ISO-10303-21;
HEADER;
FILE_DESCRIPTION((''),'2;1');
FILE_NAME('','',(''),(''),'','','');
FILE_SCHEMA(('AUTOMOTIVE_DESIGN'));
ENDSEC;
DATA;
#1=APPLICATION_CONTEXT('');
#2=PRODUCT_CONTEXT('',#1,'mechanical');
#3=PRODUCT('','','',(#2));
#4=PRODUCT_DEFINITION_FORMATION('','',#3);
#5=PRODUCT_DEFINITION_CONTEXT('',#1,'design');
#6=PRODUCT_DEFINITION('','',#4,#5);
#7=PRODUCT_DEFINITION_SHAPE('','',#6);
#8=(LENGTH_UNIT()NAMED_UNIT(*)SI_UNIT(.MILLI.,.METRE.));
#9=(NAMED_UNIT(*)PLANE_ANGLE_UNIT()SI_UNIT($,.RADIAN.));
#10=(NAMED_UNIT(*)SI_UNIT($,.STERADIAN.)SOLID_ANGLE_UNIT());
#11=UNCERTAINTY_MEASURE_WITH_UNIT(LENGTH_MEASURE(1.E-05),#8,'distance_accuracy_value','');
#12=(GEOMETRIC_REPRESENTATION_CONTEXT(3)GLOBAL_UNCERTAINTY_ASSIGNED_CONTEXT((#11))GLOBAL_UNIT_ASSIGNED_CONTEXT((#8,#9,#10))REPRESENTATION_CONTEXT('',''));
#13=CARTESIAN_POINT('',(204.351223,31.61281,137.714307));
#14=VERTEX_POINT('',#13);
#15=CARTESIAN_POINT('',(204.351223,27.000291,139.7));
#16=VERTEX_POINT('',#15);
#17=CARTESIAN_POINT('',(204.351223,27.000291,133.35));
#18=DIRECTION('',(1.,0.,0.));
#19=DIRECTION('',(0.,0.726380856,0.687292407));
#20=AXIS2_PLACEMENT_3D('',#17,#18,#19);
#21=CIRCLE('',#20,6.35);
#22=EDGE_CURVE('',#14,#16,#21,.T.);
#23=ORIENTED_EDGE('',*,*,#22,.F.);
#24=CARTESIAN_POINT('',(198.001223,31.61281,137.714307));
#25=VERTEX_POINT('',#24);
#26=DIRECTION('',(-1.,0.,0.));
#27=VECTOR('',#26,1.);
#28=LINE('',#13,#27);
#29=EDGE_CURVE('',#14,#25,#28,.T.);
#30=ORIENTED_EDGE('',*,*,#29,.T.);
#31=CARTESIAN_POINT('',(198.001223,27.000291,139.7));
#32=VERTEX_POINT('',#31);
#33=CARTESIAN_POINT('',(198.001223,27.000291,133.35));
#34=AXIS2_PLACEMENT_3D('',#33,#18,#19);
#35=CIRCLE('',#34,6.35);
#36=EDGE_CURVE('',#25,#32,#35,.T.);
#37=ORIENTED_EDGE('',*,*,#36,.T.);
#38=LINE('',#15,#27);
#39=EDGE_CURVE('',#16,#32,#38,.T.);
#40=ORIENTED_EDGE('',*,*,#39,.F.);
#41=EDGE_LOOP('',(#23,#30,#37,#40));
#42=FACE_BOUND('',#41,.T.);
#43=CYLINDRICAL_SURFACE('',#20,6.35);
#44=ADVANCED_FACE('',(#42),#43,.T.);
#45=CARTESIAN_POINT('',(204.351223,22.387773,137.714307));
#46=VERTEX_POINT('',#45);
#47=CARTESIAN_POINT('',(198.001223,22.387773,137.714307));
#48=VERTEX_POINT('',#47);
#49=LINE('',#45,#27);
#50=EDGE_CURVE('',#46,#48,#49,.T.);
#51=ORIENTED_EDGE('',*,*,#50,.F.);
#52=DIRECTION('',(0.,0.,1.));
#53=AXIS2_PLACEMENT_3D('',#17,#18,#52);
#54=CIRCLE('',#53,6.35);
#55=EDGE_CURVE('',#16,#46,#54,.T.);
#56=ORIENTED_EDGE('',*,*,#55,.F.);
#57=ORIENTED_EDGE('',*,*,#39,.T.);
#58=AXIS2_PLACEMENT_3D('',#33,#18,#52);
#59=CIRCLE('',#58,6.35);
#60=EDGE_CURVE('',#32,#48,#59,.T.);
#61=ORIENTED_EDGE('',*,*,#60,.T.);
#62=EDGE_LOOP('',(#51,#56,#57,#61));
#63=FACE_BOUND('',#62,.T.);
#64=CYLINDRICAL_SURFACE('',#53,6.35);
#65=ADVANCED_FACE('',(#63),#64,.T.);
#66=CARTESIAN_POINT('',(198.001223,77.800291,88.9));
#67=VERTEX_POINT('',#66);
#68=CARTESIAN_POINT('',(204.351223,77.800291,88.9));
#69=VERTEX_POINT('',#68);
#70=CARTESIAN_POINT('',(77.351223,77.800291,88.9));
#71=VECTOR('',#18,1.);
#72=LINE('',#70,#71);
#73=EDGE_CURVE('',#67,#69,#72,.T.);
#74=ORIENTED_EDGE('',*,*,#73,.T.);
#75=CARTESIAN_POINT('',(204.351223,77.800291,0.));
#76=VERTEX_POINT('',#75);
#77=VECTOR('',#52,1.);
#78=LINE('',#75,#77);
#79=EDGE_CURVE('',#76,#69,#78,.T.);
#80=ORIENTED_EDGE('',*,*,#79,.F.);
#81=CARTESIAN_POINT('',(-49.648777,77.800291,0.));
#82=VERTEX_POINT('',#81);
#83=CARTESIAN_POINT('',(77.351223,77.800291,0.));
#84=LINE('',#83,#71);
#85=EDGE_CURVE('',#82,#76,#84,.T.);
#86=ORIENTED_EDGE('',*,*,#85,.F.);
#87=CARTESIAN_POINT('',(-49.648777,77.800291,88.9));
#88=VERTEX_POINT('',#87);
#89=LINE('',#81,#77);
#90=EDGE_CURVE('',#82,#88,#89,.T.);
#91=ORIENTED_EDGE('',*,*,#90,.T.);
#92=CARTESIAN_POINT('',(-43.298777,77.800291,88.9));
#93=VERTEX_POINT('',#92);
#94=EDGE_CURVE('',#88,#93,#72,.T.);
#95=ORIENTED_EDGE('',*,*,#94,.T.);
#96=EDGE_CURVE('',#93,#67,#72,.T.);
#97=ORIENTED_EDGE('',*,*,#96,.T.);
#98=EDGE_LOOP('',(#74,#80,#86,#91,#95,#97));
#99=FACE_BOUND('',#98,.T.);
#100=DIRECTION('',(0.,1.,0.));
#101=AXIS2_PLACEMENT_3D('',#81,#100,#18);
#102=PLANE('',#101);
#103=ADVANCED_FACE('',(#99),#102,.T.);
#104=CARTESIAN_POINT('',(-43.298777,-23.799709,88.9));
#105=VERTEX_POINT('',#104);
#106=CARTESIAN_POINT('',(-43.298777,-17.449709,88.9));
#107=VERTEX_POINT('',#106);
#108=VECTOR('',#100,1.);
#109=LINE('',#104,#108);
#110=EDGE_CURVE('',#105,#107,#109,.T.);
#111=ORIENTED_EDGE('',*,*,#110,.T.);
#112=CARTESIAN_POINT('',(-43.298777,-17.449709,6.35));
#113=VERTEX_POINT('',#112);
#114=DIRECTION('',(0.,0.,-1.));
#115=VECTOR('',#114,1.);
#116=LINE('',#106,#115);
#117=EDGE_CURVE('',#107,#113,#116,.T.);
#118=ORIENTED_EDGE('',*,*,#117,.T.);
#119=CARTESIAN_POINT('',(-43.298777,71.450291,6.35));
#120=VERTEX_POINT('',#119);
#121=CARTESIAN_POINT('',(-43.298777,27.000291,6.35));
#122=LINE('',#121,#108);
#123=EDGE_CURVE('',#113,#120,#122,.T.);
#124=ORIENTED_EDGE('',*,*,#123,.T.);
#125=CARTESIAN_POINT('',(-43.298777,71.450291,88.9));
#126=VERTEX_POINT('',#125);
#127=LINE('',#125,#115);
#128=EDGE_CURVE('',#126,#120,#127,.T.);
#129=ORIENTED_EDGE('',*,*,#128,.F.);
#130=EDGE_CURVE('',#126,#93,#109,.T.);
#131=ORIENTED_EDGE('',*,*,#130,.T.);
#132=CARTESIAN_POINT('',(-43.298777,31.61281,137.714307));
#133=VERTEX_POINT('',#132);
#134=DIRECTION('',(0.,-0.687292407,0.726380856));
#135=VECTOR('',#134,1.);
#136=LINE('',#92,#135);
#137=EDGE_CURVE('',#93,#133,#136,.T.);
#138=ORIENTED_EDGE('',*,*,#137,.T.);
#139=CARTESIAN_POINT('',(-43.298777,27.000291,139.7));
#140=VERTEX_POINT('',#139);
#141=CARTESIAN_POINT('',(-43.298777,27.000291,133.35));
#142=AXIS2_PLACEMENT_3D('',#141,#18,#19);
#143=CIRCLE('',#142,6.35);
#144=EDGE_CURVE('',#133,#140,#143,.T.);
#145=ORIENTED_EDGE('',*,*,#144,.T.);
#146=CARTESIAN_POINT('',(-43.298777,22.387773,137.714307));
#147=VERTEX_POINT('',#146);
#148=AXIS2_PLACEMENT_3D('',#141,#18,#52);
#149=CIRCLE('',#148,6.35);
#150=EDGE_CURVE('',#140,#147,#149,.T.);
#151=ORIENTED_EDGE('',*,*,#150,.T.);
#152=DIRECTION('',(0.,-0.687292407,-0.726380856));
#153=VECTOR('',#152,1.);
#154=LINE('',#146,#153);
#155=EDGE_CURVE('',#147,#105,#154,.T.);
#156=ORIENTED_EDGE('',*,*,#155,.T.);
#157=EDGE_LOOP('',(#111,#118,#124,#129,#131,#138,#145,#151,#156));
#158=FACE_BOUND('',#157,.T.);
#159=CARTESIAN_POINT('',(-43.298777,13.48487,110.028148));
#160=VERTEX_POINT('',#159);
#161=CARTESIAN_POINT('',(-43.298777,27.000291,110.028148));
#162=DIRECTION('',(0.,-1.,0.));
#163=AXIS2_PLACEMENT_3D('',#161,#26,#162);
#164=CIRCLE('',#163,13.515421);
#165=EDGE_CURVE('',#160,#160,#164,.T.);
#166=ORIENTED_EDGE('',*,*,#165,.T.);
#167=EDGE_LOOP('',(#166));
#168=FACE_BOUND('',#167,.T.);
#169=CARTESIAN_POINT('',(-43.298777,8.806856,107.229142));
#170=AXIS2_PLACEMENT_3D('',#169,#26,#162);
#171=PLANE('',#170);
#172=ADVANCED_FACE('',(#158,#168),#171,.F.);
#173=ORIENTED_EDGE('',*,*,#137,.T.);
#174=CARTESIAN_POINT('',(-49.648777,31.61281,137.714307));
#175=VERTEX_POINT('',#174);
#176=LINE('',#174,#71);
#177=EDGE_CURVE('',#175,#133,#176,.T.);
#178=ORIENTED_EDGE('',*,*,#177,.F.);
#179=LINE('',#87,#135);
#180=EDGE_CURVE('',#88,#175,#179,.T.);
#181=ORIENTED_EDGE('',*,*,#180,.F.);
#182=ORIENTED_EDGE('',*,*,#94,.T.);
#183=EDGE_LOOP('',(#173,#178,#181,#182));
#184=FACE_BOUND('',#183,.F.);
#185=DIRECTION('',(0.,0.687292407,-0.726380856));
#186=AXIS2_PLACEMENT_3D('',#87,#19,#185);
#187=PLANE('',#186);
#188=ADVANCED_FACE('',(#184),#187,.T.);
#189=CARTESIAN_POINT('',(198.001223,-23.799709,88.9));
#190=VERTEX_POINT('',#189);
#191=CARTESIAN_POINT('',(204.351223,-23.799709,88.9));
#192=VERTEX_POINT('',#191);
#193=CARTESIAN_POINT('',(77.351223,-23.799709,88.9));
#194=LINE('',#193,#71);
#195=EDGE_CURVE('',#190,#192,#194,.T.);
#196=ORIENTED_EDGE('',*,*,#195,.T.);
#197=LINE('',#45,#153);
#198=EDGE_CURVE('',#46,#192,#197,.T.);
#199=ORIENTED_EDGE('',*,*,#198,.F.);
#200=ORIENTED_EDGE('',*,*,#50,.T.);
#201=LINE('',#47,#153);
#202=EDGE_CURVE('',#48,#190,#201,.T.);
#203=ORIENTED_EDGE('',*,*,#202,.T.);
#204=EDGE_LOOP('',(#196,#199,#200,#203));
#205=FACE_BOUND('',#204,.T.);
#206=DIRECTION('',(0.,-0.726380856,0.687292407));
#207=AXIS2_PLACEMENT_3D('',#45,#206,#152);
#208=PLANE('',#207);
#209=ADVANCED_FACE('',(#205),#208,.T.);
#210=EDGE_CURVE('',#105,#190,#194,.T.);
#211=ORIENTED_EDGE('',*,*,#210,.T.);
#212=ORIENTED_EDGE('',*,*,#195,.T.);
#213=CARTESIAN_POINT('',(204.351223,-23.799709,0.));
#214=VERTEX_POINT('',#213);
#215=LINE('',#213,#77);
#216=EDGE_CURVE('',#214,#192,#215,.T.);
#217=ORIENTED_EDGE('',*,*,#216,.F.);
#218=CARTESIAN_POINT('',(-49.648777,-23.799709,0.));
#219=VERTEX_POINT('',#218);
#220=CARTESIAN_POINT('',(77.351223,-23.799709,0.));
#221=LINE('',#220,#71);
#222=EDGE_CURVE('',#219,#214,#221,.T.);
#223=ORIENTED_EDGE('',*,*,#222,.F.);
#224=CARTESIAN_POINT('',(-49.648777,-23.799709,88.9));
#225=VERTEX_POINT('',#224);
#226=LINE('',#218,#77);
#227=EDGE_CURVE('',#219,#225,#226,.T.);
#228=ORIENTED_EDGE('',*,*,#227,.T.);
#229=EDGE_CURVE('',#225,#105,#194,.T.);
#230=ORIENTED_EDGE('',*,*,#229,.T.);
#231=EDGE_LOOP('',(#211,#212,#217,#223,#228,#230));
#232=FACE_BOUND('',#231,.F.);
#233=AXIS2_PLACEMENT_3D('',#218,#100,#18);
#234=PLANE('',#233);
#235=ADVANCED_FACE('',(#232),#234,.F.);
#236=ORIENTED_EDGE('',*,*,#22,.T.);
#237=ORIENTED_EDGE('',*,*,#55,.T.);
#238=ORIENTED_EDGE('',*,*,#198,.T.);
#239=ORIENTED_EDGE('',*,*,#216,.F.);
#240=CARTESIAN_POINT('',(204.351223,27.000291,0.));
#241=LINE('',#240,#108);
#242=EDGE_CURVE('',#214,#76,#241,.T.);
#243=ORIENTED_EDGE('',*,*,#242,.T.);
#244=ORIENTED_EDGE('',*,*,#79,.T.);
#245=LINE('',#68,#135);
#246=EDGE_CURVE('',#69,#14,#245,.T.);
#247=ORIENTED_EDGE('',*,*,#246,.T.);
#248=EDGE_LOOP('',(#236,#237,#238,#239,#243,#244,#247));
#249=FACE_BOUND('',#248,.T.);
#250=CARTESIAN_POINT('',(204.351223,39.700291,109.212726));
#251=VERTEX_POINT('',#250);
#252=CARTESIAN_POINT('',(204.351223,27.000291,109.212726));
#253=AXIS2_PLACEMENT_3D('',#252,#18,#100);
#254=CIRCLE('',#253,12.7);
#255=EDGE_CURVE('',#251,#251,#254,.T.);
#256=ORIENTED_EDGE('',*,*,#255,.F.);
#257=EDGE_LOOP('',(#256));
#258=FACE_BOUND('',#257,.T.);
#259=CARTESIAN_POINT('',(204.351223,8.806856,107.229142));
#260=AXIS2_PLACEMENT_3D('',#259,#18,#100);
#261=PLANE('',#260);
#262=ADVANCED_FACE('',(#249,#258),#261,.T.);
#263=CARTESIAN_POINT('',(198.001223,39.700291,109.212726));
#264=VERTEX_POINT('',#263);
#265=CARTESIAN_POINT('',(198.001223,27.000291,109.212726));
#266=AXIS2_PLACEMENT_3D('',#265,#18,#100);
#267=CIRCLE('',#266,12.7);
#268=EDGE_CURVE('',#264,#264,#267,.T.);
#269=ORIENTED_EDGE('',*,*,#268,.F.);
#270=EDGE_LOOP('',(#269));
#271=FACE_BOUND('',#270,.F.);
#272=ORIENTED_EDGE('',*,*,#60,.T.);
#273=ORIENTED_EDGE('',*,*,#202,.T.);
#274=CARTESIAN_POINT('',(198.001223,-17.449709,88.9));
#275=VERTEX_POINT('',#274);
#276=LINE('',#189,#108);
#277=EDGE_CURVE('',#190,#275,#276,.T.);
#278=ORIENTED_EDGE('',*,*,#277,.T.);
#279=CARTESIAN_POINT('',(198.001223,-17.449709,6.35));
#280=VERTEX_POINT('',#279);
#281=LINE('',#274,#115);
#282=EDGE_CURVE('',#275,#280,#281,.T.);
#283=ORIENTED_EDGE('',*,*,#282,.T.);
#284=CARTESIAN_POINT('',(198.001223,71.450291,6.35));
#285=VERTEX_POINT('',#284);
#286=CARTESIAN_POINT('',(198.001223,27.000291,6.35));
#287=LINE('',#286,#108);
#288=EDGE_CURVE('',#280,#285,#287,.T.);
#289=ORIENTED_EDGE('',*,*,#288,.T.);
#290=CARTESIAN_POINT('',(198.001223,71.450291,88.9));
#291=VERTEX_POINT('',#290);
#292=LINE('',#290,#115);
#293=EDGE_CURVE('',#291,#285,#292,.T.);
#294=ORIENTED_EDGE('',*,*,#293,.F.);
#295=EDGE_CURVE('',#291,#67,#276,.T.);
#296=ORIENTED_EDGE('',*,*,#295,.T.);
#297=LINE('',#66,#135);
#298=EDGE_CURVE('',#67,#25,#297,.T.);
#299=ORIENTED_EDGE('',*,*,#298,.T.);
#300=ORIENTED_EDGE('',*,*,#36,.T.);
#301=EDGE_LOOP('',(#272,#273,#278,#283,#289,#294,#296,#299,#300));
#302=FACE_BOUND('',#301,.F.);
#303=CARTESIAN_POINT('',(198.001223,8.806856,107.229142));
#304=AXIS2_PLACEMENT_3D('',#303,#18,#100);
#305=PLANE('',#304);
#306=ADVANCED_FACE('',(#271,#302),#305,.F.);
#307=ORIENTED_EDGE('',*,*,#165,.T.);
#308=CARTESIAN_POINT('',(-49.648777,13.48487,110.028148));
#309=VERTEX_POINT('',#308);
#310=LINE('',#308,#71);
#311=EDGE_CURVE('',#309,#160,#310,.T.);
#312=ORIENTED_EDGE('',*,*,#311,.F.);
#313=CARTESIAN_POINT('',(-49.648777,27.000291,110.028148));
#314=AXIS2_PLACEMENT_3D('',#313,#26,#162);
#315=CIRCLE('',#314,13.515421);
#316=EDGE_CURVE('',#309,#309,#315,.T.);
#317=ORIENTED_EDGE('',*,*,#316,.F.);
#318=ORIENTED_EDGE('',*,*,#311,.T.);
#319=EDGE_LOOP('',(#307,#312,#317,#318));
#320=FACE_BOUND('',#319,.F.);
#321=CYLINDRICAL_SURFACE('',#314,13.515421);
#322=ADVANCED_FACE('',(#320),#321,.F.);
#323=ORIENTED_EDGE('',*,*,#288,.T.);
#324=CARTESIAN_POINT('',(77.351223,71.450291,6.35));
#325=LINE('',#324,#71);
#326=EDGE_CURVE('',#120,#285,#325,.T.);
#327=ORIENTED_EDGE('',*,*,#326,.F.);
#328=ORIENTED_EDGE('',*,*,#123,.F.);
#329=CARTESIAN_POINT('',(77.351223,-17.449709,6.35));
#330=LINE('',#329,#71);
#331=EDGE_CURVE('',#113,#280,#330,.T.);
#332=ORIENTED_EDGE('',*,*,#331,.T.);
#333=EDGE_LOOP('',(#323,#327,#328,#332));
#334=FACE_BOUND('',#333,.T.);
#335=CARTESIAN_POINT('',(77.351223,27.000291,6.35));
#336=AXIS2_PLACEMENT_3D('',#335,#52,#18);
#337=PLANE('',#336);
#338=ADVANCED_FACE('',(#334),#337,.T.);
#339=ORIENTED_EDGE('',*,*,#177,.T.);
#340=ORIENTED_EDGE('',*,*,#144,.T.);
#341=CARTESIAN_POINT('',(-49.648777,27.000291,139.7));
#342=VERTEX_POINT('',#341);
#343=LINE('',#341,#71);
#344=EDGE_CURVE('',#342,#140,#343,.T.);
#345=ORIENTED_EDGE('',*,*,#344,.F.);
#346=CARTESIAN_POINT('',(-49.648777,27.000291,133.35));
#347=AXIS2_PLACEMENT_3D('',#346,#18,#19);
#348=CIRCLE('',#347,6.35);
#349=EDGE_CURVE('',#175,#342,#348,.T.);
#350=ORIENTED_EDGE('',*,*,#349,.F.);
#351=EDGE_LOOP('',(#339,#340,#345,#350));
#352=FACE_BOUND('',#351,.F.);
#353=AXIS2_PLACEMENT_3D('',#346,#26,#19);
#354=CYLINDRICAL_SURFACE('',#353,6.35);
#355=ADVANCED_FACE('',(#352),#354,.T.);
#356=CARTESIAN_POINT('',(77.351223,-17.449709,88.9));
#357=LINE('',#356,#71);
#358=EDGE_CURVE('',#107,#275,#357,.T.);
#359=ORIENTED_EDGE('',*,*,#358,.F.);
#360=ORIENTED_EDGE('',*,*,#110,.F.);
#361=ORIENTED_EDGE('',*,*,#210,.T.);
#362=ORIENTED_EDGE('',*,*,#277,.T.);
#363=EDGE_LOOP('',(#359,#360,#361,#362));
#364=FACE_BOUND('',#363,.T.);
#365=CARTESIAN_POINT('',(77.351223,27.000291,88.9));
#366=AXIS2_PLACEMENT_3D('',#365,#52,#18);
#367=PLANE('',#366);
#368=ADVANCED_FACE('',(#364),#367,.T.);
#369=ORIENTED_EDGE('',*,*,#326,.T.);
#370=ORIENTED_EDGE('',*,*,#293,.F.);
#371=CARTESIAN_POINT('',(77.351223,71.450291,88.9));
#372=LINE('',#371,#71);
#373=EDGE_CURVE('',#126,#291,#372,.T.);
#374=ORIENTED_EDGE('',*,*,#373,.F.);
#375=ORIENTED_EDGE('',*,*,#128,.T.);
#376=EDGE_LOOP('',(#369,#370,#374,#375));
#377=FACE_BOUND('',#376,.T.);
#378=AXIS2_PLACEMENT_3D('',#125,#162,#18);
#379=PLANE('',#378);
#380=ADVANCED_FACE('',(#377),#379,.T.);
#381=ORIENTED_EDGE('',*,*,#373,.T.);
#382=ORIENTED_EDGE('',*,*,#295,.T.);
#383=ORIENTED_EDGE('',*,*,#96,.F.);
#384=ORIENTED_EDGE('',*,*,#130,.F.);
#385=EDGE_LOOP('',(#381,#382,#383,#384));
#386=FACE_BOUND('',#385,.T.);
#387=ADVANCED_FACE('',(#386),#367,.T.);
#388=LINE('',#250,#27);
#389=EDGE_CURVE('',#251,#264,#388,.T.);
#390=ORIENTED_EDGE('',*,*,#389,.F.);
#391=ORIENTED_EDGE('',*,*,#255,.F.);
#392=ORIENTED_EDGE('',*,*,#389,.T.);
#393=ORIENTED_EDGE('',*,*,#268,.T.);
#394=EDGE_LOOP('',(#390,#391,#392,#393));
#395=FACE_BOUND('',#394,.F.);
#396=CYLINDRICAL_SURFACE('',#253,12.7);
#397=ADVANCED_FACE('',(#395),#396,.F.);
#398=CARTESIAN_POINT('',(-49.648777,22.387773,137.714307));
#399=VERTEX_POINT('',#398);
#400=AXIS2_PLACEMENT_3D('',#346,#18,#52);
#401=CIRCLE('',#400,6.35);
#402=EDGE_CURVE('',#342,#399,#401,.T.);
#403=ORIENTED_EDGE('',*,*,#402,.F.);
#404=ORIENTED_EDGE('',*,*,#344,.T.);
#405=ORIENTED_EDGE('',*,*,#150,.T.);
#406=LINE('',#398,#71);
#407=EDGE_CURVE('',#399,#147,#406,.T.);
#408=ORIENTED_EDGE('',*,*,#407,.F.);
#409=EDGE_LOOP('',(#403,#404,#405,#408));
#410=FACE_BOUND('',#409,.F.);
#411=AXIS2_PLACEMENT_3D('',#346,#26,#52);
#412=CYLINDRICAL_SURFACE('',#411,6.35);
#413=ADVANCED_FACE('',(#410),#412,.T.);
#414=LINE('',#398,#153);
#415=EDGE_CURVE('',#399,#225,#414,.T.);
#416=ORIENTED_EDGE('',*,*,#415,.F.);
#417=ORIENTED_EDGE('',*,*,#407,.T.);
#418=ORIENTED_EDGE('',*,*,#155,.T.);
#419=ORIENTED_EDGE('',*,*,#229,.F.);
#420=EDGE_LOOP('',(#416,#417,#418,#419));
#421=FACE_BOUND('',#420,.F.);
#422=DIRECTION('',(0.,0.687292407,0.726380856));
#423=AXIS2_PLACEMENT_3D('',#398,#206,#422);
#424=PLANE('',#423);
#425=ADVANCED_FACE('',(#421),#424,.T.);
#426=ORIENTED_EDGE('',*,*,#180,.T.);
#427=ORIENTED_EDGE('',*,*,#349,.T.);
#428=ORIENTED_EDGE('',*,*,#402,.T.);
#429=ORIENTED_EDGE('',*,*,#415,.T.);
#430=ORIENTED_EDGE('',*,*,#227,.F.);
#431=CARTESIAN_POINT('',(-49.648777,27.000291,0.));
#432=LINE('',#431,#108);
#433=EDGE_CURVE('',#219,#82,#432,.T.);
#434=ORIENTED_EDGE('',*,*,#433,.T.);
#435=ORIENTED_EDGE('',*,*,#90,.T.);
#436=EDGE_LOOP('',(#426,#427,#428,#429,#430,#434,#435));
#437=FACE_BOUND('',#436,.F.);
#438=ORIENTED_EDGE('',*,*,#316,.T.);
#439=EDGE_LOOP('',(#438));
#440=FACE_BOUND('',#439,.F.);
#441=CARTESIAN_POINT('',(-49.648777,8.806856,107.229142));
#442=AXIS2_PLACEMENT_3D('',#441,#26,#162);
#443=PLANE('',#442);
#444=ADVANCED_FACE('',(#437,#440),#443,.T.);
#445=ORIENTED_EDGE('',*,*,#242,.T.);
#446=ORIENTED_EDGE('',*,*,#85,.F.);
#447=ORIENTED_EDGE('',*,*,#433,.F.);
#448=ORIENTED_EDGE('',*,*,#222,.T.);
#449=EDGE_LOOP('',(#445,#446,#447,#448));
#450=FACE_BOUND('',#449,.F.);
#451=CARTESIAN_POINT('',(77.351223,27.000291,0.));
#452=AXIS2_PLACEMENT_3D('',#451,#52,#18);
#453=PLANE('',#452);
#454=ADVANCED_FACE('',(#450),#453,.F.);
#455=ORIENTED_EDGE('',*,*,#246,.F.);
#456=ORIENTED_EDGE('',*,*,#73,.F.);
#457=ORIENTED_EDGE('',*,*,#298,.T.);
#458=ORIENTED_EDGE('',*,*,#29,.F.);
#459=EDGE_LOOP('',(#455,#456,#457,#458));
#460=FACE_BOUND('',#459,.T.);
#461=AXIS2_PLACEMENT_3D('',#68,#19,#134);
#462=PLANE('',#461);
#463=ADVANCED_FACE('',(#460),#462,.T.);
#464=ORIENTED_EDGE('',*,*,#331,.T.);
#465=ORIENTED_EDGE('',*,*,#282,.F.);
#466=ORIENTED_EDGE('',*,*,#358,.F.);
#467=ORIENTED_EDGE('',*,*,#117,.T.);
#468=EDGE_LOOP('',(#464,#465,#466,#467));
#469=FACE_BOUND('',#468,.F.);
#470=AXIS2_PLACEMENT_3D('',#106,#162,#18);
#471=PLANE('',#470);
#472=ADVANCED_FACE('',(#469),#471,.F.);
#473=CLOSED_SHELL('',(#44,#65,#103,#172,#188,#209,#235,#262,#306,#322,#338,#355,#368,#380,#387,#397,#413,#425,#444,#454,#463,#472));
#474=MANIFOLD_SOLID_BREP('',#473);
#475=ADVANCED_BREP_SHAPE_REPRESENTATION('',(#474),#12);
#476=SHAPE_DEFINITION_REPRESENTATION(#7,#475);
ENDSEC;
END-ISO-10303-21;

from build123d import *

# Parameters (mm, degrees)
F0_W      = 254
F0_H      = 101.6
F1_DEPTH  = 88.9
F4_DEPTH  = 6.35
F2_W      = 241.3
F2_H      = 88.9
F8_DEPTH  = 82.55
F9_R      = 12.7
F10_DEPTH = 25.4
F11_R     = 13.5154213428
F12_DEPTH = 25.4


with BuildPart() as f1:
    # F0 (on Top) → F1 (new body)
    with BuildSketch(Plane.XY):
        with Locations((77.3512227356, 27.0002914594)):
            Rectangle(F0_W, F0_H)
    extrude(amount=F1_DEPTH)

    # F3 (on face) → F4 (join)
    with BuildSketch(Plane.YZ.offset(204.3512227356)):
        with BuildLine():
            Line((22.3877730248, 137.7143067824), (-23.7997085406, 88.9))
            Line((-23.7997085406, 88.9), (27.0002914594, 88.9))
            Line((27.0002914594, 88.9), (27.0002914594, 139.7))
            ThreePointArc((27.0002914594, 139.7), (24.489399991, 139.1824886656), (22.3877730248, 137.7143067824))
        make_face()
        with BuildLine():
            Line((27.0002914594, 139.7), (27.0002914594, 88.9))
            Line((27.0002914594, 88.9), (77.8002914594, 88.9))
            Line((77.8002914594, 88.9), (31.6128098939, 137.7143067824))
            ThreePointArc((31.6128098939, 137.7143067824), (29.5111829277, 139.1824886656), (27.0002914594, 139.7))
        make_face()
    extrude(amount=-F4_DEPTH)

    # F7: F1 across plane


with BuildPart() as f1_1:
    add(f1.part)
    add(f1.part.mirror(Plane(origin=(77.3512227356, 27.0002914594, 88.9), x_dir=(0, 1, 0), z_dir=(1, 0, 0))))

    # F2 (on face) → F8 (cut)
    with BuildSketch(Plane.XY.offset(88.9)):
        with Locations((77.3512227356, 27.0002914594)):
            Rectangle(F2_W, F2_H)
    extrude(amount=-F8_DEPTH, mode=Mode.SUBTRACT)

    # F9 (on face) → F10 (cut)
    with BuildSketch(Plane.YZ.offset(204.3512227356)):
        with Locations((27.0002914594, 109.2127263546)):
            Circle(F9_R)
    extrude(amount=-F10_DEPTH, mode=Mode.SUBTRACT)

    # F11 (on face) → F12 (cut)
    with BuildSketch(Plane(origin=(-49.6487772644, 0, 0), x_dir=(0, -1, 0), z_dir=(-1, 0, 0))):
        with Locations((-27.0002914594, 110.0281476974)):
            Circle(F11_R)
    extrude(amount=-F12_DEPTH, mode=Mode.SUBTRACT)


solid = f1_1.part
